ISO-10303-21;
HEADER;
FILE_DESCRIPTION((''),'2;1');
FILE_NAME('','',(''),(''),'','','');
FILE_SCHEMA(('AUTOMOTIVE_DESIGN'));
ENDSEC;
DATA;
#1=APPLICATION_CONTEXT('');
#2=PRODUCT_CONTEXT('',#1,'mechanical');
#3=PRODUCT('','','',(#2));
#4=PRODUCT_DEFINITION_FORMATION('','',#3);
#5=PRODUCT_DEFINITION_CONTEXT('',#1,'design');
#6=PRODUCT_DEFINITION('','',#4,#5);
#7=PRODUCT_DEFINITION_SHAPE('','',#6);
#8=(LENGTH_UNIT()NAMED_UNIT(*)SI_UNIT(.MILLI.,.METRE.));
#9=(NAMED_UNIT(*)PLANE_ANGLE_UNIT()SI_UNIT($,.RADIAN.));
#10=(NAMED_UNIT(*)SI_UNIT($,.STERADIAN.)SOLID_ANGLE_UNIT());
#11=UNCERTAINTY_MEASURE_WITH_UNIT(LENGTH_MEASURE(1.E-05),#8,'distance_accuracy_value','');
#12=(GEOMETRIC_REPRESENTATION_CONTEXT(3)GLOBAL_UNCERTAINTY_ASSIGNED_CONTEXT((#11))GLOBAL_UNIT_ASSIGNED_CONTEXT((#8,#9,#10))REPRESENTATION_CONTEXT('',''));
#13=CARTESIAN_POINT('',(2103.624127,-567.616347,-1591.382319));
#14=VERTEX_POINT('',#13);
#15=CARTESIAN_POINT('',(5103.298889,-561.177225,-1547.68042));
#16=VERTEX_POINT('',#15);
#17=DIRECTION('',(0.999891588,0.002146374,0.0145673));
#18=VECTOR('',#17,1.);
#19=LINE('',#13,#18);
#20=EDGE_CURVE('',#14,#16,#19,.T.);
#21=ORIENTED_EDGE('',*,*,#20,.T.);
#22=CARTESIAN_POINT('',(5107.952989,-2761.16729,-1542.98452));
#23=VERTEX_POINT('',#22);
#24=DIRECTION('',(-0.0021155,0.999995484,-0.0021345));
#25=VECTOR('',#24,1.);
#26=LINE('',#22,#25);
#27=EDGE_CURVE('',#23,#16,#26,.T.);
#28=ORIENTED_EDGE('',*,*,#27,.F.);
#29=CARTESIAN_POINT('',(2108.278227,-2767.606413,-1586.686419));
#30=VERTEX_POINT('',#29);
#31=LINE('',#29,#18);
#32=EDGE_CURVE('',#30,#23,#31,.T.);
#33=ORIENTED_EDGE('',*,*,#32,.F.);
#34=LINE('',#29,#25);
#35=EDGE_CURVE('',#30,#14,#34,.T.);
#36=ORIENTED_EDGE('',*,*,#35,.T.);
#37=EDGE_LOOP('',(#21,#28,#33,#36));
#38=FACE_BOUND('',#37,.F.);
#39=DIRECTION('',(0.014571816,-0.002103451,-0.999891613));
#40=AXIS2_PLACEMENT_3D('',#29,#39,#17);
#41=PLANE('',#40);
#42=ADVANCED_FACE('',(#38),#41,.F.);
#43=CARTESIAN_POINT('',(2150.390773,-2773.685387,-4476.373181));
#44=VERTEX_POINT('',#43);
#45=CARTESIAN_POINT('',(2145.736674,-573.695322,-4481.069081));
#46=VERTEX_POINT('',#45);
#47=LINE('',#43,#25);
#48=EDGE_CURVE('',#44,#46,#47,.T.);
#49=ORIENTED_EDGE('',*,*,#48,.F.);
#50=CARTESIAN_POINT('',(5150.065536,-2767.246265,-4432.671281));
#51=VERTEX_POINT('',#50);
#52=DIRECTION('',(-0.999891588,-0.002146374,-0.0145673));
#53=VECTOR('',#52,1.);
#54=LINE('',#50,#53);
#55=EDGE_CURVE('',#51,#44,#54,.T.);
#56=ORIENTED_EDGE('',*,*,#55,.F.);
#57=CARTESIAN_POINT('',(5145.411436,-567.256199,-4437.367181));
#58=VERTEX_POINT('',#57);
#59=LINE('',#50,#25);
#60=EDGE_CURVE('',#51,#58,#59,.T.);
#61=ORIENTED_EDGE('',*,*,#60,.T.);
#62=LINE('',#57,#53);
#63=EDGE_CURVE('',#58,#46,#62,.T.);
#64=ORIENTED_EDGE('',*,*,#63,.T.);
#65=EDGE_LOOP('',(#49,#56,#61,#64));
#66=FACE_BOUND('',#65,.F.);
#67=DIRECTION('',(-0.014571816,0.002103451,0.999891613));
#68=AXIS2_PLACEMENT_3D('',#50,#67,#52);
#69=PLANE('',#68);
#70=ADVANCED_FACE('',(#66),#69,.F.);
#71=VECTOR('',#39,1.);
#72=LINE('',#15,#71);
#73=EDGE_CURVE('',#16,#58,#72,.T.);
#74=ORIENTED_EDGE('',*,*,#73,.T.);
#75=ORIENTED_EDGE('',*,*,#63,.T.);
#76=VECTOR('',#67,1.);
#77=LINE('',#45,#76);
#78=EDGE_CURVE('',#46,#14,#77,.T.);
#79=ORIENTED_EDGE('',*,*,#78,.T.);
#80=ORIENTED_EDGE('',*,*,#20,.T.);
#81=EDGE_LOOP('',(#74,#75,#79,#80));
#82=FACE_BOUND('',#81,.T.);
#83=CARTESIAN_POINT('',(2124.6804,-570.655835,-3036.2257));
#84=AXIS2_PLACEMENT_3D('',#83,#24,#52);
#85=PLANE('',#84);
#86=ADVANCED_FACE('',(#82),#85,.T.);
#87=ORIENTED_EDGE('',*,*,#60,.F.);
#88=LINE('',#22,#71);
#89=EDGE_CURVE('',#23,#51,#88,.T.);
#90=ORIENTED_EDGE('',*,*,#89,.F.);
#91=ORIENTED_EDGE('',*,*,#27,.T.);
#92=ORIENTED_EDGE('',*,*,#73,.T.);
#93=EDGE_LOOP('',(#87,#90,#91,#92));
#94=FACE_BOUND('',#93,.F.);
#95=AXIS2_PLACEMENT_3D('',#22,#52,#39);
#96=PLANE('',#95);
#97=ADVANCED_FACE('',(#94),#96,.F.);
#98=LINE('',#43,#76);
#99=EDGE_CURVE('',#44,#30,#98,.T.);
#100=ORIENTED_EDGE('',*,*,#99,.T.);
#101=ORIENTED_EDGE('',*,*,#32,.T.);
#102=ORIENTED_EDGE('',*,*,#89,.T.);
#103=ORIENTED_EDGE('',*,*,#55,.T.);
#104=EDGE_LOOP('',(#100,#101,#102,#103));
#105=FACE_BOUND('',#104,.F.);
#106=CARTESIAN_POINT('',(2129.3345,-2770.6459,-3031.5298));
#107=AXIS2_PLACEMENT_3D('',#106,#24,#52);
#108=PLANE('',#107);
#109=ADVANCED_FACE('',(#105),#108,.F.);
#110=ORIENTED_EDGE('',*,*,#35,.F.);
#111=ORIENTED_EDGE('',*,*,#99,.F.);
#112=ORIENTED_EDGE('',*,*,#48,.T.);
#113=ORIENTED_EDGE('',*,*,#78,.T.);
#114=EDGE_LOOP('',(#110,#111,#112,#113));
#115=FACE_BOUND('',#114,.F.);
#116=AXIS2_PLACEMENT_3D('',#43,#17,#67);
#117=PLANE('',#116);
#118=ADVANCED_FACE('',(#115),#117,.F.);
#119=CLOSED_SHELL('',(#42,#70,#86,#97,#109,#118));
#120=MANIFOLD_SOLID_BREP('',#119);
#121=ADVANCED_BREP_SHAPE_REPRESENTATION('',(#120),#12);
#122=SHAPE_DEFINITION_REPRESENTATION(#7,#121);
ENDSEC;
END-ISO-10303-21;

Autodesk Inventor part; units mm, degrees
ref_plane "YZ Plane" through (0, 0, 0) normal (1, 0, 0) x (0, 1, 0)
ref_plane "XZ Plane" through (0, 0, 0) normal (0, 1, 0) x (-1, 0, 0)
ref_plane "XY Plane" through (0, 0, 0) normal (0, 0, 1) x (1, 0, 0)
ref_plane "Plano de trabajo1" through (2129.3345, -2770.6459, -3031.5298) normal (-0.0021155, 0.9999955, -0.0021345) x (-0.9998916, -0.0021464, -0.0145673)
sketch "Boceto1" plane through (2129.3345, -2770.6459, -3031.5298) normal (-0.0021155, 0.9999955, -0.0021345) x (-0.9998916, -0.0021464, -0.0145673)
  line L0 (0, 1445) -> (-3000, 1445)
  line L1 (-3000, 1445) -> (-3000, -1445)
  line L2 (-3000, -1445) -> (0, -1445)
  line L3 (0, -1445) -> (0, 1445)
  point P0 (2078.9955, 3068.0575)
  dimension "d0" = 3000
  dimension "d1" = 2890
extrude "Extrusión1" add sketch "Boceto1" along normal blind 2200
sketch "Boceto2" plane through (5107.9529, -2761.1672, -1542.9845) normal (0.9998916, 0.0021464, 0.0145673) x (0.0145718, -0.0021035, -0.9998916)
  line L0 (0, 0) -> (0, 2200) projected
  line L1 (0, 550) -> (2890, 550)
  line L2 (2890, 0) -> (2890, 2200) projected
  line L3 (0, 2200) -> (2890, 2200) projected
  line L4 (0, 0) -> (2890, 0) projected
  line L5 (2390, 2200) -> (2390, 0)
  line L6 (500, 1800) -> (2390, 1800)
  line L7 (2390, 900) -> (500, 900)
  line L8 (1445, 2200) -> (1445, 1800)
  line L9 (1445, 900) -> (1445, 0)
  line L10 (2890, 1100) -> (2390, 1100)
  line L11 (500, 1100) -> (0, 1100)
  line L12 (0, 1650) -> (500, 1650)
  line L13 (2390, 1650) -> (2890, 1650)
  line L14 (2390, 1100) -> (2390, 900)
  line L15 (500, 0) -> (500, 2200)
  point P0 (-1623.0575, 2768.6672)
  dimension "d6" = 550
  dimension "d8" = 500
  dimension "d10" = 900
  dimension "d11" = 900
sketch "Boceto3" plane through (5150.0655, -2767.2462, -4432.6713) normal (0.0145718, -0.0021035, -0.9998916) x (-0.9998916, -0.0021464, -0.0145673)
  line L0 (0, 0) -> (0, 2200) projected
  line L1 (3000, 0) -> (3000, 2200) projected
  line L2 (0, 2200) -> (3000, 2200) projected
  line L3 (2400, 2200) -> (2400, 0)
  line L4 (0, 0) -> (3000, 0) projected
  line L5 (1800, 2200) -> (1800, 0)
  line L6 (1300, 2200) -> (1300, 0)
  line L7 (600, 2200) -> (600, 0)
  line L8 (600, 1995) -> (1300, 1995)
  line L9 (870, 1995) -> (870, 1495)
  line L10 (870, 1495) -> (600, 1495)
  line L11 (1070, 1995) -> (1070, 1495)
  line L12 (1070, 1495) -> (1300, 1495)
  line L13 (600, 495) -> (1300, 495)
  line L14 (0, 1650) -> (600, 1650)
  line L15 (1300, 1650) -> (3000, 1650)
  line L16 (0, 550) -> (600, 550)
  line L17 (1300, 550) -> (3000, 550)
  line L18 (0, 1100) -> (600, 1100)
  line L19 (1300, 1100) -> (3000, 1100)
  point P0 (5078.9955, 2768.6672)
  dimension "d15" = 600
  dimension "d16" = 600
  dimension "d17" = 600
  dimension "d18" = 500
  dimension "d19" = 500
  dimension "d20" = 200
  dimension "d21" = 230
  dimension "d22" = 1000
  dimension "d23" = 205
sketch "Boceto4" plane through (2108.2782, -2767.6064, -1586.6864) normal (-0.0145718, 0.0021035, 0.9998916) x (0.9998916, 0.0021464, 0.0145673)
  line L0 (3000, 2200) -> (0, 2200) projected
  line L1 (600, 2200) -> (600, 0)
  line L2 (3000, 0) -> (0, 0) projected
  line L3 (1200, 2200) -> (1200, 0)
  line L4 (1700, 2200) -> (1700, 0)
  line L5 (2400, 2200) -> (2400, 0)
  line L6 (0, 0) -> (0, 2200) projected
  line L7 (3000, 0) -> (3000, 2200) projected
  line L8 (0, 0) -> (0, 2200) projected
  line L9 (1700, 1995) -> (2400, 1995)
  line L10 (1930, 1995) -> (1930, 1495)
  line L11 (1930, 1495) -> (1700, 1495)
  line L12 (2130, 1995) -> (2130, 1495)
  line L13 (2130, 1495) -> (2400, 1495)
  line L14 (0, 1650) -> (1700, 1650)
  line L15 (2400, 1650) -> (3000, 1650)
  line L16 (0, 1100) -> (1700, 1100)
  line L17 (2400, 1100) -> (3000, 1100)
  line L18 (0, 550) -> (1700, 550)
  line L19 (2400, 550) -> (3000, 550)
  line L20 (1700, 495) -> (2400, 495)
  point P0 (-2078.9955, 2768.6672)
  point P1 (2130, 1745)
  point P2 (2265, 1495)
  point P3 (1500, 0)
  dimension "d24" = 600
  dimension "d25" = 600
  dimension "d26" = 500
  dimension "d27" = 600
  dimension "d31" = 500
  dimension "d33" = 205
  dimension "d34" = 230
  dimension "d35" = 200
  dimension "d36" = 1000
  dimension "d46" = 495
  dimension "d47" = 1100
sketch "Boceto5" plane through (2150.3908, -2773.6854, -4476.3732) normal (-0.9998916, -0.0021464, -0.0145673) x (-0.0145718, 0.0021035, 0.9998916)
  line L0 (2890, 0) -> (0, 0) projected
  line L1 (2090, 0) -> (2090, 1800)
  line L2 (2890, 2200) -> (0, 2200) projected
  line L3 (2090, 1800) -> (2890, 1800)
  line L4 (2890, 0) -> (2890, 2200) projected
  line L5 (2090, 1800) -> (2090, 2200)
  line L6 (0, 0) -> (0, 2200) projected
  line L7 (0, 1700) -> (2090, 1700)
  line L8 (0, 800) -> (2090, 800)
  line L9 (200, 1700) -> (200, 800)
  line L10 (1890, 1700) -> (1890, 800)
  line L11 (500, 2200) -> (500, 1700)
  line L12 (500, 800) -> (500, 0)
  line L13 (1590, 2200) -> (1590, 1700)
  line L14 (1590, 800) -> (1590, -24.3728)
  point P0 (4513.0575, 2768.6672)
  point P1 (2090, 2000)
  dimension "d37" = 1800
  dimension "d38" = 800
  dimension "d39" = 800
  dimension "d40" = 500
  dimension "d44" = 200
  dimension "d45" = 200
properties part number "GeoReferencia"
